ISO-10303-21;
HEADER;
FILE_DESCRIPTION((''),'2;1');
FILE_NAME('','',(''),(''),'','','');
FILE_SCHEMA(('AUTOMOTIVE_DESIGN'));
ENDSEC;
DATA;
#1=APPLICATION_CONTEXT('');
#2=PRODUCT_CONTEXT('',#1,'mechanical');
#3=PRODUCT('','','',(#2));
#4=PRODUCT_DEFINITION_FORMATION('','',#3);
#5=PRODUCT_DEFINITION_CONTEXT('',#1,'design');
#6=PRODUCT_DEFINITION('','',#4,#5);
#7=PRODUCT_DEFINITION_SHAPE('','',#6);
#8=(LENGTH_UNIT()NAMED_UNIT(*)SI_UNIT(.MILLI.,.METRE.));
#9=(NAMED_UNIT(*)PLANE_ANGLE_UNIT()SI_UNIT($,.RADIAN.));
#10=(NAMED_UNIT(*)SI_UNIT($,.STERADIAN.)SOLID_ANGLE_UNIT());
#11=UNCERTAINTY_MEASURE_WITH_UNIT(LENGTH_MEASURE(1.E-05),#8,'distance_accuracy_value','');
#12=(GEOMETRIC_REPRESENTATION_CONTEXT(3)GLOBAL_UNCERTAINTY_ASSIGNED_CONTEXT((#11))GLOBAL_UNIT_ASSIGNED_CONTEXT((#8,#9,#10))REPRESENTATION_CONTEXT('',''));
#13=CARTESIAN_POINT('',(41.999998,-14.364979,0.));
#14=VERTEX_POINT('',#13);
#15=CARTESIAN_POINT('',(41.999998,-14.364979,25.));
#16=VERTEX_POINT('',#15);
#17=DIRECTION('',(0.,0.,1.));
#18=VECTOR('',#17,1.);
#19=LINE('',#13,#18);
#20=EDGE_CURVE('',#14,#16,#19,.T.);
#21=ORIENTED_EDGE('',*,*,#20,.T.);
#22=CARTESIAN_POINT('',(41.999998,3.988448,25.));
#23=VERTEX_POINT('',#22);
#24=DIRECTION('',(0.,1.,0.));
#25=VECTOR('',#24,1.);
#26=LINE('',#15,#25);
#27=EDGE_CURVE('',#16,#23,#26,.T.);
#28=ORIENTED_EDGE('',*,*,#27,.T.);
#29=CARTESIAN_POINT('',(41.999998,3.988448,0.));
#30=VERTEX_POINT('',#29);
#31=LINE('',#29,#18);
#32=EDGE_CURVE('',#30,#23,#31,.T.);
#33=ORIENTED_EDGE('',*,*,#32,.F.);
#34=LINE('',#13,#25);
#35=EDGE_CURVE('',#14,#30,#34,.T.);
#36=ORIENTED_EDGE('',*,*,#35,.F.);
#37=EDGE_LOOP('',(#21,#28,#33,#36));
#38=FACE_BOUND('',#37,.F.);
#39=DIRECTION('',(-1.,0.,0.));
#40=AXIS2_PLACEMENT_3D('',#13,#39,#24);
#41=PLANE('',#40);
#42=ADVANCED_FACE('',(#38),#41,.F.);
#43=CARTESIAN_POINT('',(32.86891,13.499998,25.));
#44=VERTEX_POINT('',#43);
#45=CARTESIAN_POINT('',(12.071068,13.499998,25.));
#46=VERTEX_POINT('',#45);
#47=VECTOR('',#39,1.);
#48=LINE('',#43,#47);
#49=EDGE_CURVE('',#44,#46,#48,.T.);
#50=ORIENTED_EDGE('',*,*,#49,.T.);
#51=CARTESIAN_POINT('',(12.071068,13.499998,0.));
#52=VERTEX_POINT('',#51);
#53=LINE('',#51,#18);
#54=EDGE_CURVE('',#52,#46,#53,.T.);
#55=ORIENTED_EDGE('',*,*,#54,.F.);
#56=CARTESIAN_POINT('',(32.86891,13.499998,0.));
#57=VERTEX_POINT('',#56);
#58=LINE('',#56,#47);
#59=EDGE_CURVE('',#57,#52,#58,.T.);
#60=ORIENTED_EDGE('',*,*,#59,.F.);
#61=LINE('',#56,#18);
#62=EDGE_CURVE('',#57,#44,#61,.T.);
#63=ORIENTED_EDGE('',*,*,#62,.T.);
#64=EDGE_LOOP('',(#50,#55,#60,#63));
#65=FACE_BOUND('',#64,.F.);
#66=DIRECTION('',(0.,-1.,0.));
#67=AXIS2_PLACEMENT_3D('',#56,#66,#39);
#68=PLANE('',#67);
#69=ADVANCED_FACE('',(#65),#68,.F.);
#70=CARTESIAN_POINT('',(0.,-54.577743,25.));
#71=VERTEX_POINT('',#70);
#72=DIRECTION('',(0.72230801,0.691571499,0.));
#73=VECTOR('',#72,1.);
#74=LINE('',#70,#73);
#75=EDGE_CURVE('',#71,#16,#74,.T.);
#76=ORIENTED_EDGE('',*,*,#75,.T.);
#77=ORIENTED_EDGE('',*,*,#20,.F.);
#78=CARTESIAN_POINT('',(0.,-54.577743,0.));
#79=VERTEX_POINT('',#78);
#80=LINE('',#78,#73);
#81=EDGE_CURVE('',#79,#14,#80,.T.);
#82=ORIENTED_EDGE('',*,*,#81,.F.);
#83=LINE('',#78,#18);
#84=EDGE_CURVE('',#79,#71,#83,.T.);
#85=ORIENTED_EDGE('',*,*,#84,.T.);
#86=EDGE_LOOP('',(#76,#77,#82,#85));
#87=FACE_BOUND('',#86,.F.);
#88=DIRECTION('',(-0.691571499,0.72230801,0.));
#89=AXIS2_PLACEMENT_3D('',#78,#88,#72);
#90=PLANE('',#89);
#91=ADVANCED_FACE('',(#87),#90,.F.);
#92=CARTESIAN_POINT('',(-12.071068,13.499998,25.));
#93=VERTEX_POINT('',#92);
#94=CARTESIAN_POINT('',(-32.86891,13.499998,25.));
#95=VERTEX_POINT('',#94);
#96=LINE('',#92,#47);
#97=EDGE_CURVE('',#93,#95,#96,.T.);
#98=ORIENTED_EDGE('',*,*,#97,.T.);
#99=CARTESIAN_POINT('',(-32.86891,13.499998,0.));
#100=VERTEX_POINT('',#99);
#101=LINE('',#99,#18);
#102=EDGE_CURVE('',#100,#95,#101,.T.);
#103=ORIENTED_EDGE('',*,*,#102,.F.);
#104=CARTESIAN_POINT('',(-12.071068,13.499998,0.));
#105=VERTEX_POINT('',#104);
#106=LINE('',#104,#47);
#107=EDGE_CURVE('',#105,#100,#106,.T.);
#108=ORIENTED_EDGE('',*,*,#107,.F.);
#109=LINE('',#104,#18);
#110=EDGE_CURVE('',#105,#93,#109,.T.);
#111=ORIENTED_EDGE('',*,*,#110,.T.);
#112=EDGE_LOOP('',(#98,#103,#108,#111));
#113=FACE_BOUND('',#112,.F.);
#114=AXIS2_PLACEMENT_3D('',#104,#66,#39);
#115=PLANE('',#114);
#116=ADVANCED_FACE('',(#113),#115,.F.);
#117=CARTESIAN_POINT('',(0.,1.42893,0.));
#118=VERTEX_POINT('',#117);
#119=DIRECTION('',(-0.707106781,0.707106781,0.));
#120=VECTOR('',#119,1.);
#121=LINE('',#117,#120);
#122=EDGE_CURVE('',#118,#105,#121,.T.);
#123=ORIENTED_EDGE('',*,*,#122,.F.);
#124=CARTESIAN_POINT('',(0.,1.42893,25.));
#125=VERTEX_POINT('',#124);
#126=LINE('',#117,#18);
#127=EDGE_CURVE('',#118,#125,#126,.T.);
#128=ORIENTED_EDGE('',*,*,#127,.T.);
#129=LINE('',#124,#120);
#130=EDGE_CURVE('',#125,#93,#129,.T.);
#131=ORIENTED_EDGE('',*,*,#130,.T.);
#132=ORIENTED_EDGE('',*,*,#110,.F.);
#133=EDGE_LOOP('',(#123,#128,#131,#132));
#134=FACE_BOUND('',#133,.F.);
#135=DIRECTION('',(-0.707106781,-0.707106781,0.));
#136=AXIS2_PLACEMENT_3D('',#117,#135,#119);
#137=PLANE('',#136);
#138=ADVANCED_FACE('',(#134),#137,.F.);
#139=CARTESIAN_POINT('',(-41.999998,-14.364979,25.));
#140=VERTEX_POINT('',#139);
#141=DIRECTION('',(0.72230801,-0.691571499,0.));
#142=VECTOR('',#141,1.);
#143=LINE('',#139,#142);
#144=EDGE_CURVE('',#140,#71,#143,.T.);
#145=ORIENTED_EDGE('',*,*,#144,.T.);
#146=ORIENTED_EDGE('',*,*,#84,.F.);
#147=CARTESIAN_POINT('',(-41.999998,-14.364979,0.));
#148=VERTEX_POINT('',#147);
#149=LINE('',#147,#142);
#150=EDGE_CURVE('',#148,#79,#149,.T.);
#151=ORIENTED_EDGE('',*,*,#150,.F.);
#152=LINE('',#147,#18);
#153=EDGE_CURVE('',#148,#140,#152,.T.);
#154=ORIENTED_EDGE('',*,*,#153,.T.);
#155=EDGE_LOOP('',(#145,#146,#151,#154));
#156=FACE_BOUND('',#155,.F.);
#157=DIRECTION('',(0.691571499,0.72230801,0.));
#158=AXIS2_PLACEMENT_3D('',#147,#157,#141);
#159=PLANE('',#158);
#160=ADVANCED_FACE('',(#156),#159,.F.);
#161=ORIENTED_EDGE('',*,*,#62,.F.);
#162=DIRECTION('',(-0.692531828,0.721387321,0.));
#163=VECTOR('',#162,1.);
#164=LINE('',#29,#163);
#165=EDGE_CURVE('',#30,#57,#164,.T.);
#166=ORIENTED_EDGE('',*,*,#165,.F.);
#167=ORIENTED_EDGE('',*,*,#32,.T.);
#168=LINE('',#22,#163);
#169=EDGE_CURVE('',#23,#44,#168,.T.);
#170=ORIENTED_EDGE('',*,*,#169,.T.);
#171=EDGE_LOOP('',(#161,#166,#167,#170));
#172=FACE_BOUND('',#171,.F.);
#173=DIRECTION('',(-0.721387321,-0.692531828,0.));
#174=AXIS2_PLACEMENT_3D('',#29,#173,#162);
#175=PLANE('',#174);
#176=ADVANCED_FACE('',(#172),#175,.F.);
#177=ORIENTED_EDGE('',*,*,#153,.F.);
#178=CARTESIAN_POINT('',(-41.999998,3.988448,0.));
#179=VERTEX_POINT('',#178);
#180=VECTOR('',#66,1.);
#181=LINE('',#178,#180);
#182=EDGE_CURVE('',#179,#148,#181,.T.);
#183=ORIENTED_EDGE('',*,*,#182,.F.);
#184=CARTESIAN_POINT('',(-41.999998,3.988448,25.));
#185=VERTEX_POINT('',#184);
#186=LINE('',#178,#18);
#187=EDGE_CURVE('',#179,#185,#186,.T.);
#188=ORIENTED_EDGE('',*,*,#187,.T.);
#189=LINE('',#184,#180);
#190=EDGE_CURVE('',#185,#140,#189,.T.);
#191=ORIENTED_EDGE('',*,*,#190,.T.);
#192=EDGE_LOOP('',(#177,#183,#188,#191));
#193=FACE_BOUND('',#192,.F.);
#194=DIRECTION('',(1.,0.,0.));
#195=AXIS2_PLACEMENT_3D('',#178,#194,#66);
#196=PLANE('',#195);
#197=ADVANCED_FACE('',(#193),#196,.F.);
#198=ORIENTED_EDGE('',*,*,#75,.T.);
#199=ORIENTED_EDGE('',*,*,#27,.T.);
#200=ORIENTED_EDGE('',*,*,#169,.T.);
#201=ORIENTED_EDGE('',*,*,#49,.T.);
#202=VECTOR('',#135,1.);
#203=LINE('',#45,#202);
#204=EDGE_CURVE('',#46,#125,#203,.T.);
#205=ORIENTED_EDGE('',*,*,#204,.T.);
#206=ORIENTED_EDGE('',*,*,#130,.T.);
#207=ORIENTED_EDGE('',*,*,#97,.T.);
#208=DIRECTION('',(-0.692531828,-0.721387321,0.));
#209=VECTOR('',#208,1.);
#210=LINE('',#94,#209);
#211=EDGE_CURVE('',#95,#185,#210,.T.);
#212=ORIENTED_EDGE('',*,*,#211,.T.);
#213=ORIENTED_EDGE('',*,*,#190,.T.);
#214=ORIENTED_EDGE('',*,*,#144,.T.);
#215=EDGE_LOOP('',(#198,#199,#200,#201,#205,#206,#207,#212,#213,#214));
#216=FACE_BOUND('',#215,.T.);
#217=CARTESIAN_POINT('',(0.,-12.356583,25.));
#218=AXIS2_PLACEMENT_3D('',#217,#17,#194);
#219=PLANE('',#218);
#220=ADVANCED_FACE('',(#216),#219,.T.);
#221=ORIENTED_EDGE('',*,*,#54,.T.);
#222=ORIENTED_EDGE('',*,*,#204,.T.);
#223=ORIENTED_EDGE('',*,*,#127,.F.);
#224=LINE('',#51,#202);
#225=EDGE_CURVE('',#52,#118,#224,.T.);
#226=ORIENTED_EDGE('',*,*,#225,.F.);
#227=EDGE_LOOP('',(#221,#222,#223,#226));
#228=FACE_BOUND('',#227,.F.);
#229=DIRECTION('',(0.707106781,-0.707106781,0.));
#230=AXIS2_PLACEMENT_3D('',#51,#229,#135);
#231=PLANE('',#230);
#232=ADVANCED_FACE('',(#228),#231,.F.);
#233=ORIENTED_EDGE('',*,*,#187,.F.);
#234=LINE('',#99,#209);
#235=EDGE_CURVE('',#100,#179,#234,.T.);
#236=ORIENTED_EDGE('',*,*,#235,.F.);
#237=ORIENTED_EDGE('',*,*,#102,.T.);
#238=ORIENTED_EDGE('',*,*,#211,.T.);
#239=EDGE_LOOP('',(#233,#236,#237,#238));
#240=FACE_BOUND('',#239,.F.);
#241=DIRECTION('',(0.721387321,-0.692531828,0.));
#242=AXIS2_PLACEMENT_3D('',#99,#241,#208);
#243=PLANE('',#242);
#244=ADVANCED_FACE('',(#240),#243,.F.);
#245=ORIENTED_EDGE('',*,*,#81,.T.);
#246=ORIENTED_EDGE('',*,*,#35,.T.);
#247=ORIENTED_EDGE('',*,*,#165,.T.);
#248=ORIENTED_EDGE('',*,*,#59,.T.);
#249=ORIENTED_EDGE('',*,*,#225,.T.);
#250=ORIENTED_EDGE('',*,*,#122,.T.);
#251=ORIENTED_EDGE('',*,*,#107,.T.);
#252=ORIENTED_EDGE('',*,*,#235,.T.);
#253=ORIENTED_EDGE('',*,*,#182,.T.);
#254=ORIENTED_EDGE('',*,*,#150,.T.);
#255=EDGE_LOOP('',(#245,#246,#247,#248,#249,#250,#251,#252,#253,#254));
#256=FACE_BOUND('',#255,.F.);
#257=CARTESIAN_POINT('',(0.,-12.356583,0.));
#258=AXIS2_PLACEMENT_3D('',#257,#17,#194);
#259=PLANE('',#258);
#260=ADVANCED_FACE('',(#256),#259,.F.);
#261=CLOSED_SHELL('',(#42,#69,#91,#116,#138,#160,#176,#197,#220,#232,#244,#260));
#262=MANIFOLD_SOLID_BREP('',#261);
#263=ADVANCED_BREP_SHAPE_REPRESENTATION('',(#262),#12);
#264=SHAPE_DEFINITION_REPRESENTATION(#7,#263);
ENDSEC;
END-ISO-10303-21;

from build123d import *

# Parameters (mm, degrees)
F1_DEPTH = 25


# Not quite as in the source:
# - a feature names something its author has since deleted; it is built from what else it names


with BuildPart() as f1:
    # F0 (on Top) → F1 (new body)
    with BuildSketch(Plane.XY):
        Polygon((-41.9999984371, 3.9884479332), (-41.9999984371, -14.3649787007), (0, -54.5777431617), (41.9999984371, -14.3649787007), (41.9999984371, 3.9884479332), (32.8689099534, 13.4999984371), (12.0710684592, 13.4999984371), (0, 1.4289299778), (-12.0710684592, 13.4999984371), (-32.8689099534, 13.4999984371), align=None)
    extrude(amount=F1_DEPTH)


solid = f1.part
